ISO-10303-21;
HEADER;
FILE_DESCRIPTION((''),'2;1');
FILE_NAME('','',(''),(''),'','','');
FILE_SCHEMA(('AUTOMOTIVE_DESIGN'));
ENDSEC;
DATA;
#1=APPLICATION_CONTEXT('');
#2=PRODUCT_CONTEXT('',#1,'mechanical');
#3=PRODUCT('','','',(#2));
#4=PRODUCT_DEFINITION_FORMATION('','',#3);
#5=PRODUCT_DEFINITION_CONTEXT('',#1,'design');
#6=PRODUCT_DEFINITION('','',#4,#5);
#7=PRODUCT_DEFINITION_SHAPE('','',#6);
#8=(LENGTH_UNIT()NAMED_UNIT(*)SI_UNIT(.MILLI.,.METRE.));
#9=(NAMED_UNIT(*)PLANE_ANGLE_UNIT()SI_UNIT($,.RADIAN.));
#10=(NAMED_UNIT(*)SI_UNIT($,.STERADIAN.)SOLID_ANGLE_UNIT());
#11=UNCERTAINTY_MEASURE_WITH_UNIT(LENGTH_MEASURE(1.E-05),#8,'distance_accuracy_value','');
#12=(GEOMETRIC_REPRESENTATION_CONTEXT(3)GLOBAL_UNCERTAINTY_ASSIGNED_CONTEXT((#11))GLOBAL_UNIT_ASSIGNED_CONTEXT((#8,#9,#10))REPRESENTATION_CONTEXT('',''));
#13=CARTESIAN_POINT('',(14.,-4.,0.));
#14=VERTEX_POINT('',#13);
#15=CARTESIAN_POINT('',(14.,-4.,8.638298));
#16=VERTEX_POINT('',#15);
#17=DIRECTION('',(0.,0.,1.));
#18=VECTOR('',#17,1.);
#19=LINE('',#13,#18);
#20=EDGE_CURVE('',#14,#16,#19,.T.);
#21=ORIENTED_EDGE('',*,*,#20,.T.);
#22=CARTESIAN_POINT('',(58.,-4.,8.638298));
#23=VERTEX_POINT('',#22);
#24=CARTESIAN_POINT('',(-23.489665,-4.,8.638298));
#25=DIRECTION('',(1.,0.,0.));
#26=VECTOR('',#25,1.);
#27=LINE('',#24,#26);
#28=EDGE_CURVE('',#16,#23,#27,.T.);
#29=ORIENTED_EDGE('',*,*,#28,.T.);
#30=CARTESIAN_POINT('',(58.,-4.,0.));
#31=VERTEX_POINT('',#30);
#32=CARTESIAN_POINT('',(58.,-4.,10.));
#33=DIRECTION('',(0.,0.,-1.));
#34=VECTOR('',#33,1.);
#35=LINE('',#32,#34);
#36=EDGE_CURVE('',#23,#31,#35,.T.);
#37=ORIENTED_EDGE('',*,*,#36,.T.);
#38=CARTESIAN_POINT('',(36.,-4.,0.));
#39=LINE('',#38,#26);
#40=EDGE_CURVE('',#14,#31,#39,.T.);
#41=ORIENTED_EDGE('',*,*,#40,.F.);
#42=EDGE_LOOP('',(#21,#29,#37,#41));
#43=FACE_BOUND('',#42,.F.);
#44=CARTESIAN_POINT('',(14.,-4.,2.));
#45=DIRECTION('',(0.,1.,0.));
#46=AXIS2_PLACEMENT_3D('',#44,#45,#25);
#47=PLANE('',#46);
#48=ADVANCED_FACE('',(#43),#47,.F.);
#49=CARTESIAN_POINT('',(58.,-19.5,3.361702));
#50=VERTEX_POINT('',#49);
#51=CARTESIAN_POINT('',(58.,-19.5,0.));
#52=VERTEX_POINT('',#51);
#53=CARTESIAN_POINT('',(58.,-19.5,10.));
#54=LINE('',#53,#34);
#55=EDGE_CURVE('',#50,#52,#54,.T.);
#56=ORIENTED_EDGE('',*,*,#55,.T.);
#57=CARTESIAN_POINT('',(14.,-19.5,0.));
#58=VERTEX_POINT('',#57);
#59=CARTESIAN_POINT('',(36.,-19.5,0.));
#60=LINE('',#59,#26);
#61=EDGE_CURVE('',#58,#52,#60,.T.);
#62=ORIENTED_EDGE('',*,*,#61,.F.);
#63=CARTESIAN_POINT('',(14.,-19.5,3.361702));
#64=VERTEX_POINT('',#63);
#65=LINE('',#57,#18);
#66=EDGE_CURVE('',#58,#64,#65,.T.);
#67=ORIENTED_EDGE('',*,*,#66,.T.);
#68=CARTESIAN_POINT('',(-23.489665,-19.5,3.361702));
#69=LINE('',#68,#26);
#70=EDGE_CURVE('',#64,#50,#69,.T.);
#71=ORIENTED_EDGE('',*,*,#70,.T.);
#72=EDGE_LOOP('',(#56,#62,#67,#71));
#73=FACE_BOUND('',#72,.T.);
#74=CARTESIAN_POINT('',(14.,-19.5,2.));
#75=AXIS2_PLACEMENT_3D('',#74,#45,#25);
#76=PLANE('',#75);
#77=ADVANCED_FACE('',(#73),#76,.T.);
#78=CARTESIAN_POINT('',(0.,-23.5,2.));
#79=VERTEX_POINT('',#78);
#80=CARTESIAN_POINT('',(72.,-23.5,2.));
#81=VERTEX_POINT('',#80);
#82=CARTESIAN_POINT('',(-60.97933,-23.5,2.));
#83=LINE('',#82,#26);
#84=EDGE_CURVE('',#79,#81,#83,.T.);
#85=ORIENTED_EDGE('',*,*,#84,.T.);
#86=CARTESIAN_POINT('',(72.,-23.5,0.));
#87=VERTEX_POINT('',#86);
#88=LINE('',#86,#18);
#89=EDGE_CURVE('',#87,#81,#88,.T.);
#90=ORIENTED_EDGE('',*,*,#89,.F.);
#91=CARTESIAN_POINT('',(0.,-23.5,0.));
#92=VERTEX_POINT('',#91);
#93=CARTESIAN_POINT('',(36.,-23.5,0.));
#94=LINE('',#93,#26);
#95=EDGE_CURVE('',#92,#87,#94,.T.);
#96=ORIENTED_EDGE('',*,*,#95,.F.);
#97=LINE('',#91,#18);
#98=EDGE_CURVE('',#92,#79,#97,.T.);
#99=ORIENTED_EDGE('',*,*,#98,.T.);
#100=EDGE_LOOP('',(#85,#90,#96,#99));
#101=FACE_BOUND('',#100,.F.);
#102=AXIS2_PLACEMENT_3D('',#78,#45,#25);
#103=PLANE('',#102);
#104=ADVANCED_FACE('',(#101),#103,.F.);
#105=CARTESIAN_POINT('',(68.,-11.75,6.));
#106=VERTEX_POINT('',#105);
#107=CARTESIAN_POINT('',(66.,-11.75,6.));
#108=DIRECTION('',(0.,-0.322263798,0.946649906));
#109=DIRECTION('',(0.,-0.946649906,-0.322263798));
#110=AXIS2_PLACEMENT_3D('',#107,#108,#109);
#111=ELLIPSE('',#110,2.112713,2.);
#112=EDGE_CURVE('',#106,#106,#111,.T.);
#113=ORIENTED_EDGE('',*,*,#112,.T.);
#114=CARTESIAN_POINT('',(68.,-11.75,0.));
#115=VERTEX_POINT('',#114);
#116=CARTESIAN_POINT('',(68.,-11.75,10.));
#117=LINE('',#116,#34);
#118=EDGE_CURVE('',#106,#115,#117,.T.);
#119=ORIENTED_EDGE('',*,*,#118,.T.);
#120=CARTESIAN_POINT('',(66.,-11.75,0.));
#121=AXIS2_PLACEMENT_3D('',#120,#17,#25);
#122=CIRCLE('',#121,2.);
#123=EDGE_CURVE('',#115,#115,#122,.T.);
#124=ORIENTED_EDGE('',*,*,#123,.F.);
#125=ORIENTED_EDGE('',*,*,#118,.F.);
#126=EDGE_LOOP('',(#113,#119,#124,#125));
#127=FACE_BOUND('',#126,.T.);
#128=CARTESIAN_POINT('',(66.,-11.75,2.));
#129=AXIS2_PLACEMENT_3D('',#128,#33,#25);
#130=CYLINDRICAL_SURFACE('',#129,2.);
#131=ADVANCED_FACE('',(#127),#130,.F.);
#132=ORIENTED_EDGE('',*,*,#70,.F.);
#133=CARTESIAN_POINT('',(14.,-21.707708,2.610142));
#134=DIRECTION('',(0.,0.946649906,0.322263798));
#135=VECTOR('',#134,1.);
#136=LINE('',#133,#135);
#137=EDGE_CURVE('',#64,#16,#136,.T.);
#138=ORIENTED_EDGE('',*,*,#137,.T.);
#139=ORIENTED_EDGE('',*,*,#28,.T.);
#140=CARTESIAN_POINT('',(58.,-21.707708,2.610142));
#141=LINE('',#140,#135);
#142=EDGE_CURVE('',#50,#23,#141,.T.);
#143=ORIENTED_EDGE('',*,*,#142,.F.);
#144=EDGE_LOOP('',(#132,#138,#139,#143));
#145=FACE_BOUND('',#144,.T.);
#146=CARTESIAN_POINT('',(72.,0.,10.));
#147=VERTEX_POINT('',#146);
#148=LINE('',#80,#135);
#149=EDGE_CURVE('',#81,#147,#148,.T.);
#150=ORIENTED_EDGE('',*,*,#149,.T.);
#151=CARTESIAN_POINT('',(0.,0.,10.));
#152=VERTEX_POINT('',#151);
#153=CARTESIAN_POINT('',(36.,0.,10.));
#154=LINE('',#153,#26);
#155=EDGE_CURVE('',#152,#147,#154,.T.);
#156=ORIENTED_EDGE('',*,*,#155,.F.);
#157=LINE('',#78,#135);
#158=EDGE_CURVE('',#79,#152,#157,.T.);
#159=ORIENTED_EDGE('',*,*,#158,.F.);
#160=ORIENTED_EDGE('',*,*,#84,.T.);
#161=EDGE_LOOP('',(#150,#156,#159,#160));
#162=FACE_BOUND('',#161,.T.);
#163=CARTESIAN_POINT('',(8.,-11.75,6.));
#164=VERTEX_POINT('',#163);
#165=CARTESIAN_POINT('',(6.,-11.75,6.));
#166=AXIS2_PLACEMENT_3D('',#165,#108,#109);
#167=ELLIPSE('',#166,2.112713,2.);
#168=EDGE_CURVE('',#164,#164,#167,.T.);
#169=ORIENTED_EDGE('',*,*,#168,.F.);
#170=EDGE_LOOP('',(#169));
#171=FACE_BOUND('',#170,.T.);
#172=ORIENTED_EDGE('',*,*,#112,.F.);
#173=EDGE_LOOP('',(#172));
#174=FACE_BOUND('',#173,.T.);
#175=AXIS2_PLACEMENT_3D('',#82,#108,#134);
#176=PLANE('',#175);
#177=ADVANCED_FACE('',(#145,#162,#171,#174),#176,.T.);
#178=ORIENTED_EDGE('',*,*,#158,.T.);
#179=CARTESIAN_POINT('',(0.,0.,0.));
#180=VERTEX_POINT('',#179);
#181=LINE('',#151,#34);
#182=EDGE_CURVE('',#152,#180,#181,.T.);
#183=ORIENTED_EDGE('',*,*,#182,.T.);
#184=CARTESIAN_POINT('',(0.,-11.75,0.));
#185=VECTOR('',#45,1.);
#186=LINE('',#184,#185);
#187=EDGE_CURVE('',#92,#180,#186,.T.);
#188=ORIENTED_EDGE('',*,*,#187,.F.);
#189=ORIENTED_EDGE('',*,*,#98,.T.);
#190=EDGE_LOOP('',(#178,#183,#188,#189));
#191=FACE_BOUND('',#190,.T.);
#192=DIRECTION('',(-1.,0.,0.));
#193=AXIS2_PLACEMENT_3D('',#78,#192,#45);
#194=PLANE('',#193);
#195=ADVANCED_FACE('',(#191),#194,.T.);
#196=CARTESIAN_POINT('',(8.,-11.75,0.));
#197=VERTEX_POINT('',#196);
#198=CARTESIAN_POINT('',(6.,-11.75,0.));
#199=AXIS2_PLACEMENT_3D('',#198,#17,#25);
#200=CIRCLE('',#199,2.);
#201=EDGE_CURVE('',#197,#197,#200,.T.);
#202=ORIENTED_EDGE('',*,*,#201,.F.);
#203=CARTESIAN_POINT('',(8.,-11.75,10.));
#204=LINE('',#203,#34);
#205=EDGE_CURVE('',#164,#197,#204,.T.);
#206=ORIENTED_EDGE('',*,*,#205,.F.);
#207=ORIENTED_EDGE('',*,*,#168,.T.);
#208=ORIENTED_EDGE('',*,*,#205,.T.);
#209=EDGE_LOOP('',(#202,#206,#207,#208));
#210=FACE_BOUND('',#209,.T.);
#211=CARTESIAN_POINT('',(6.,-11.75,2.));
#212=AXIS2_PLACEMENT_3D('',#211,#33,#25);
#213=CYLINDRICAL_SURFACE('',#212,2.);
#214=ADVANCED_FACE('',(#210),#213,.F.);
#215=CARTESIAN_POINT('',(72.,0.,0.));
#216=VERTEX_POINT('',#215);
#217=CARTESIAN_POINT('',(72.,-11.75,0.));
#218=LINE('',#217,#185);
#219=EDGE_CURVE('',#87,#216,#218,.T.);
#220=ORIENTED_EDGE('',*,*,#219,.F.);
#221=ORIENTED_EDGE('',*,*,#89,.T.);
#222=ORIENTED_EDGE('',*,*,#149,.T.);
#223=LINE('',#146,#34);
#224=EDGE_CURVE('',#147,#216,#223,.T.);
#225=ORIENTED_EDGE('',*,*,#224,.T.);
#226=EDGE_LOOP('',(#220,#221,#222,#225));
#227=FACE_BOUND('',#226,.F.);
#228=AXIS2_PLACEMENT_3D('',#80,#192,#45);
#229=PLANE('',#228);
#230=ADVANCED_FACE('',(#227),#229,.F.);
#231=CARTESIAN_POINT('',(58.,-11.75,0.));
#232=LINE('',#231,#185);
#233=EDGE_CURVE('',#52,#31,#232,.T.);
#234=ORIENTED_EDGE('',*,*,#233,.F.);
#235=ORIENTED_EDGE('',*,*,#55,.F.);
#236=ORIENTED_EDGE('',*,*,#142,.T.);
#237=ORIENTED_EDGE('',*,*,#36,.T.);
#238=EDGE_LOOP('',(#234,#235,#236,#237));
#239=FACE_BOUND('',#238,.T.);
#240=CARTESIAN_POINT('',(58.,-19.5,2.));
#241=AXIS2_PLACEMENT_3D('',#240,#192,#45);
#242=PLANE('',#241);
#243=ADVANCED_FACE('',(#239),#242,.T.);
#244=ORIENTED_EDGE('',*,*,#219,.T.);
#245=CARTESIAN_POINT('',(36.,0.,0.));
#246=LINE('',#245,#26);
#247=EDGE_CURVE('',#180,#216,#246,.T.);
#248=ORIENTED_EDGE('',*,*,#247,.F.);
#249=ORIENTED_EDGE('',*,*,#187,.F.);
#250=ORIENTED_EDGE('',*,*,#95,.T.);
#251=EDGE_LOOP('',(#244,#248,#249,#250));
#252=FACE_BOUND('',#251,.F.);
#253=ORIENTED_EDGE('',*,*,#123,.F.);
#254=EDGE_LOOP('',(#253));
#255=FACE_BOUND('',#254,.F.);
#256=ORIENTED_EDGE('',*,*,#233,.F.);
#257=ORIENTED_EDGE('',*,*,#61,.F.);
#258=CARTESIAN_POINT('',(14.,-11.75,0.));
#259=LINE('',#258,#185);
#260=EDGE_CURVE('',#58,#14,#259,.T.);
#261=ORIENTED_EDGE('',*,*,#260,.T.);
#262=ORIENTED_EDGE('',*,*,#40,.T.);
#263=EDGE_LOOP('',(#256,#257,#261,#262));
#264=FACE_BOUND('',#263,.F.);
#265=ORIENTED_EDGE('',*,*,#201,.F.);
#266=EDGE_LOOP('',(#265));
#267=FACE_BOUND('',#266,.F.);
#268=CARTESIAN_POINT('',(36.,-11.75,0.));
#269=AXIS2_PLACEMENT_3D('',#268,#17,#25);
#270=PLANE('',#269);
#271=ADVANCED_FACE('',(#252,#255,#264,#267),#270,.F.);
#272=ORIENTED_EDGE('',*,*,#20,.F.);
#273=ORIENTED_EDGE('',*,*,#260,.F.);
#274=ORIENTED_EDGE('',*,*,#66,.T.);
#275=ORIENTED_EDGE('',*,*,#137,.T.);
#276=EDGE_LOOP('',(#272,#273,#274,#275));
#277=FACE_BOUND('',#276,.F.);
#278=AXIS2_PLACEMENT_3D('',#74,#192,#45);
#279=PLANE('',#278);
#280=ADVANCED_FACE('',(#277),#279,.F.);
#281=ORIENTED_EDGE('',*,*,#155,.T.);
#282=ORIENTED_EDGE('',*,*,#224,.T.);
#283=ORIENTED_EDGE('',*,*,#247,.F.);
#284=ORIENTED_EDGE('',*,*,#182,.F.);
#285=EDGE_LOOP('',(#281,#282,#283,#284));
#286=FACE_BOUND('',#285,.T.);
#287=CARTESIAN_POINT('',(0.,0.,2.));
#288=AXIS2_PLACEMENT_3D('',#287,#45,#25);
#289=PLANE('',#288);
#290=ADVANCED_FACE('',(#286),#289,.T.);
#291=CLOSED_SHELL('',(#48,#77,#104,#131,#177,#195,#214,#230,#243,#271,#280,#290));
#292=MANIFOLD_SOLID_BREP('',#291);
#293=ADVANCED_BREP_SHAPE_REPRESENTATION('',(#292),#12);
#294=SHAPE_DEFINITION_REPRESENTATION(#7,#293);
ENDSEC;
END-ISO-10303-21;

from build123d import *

# Parameters (mm, degrees)
F0_W        = 72
F0_H        = 23.5
F0_R        = 2
F0_W_2      = 44
F0_H_2      = 15.5
F1_DEPTH    = 2
F2_DEPTH    = 8
F3_T1_DEPTH = 193.9586602962


# Not quite as in the source:
# - a fillet or chamfer that OpenCascade refuses, or shapes differently, is made with other operations: its cross-section is extruded or revolved along the edge and cut away or added


with BuildPart() as f1:
    # F0 (on Top) → F1 (new body)
    with BuildSketch(Plane.XY):
        with Locations((36, -11.75)):
            Rectangle(F0_W, F0_H)
        with Locations((6, -11.75)):
            Circle(F0_R, mode=Mode.SUBTRACT)
        with Locations((36, -11.75)):
            Rectangle(F0_W_2, F0_H_2, mode=Mode.SUBTRACT)
        with Locations((66, -11.75)):
            Circle(F0_R, mode=Mode.SUBTRACT)
    extrude(amount=F1_DEPTH)

    # F2 (add): a face of the model
    f2_faces = [f1.faces().sort_by_distance(p)[0] for p in [
        (36, -0.7573803536, 2),
    ]]
    extrude(f2_faces, amount=F2_DEPTH)

    # F3: chamfer of 23.5 x 8 on 1 edges, made by hand

    # F3_s2 → F3_t1 (cut)
    with BuildSketch(Plane.YZ.offset(-60.9793301481)):
        Polygon((-23.5, 2), (0, 10), (-23.5, 10), align=None)
    extrude(amount=F3_T1_DEPTH, mode=Mode.SUBTRACT)


solid = f1.part
